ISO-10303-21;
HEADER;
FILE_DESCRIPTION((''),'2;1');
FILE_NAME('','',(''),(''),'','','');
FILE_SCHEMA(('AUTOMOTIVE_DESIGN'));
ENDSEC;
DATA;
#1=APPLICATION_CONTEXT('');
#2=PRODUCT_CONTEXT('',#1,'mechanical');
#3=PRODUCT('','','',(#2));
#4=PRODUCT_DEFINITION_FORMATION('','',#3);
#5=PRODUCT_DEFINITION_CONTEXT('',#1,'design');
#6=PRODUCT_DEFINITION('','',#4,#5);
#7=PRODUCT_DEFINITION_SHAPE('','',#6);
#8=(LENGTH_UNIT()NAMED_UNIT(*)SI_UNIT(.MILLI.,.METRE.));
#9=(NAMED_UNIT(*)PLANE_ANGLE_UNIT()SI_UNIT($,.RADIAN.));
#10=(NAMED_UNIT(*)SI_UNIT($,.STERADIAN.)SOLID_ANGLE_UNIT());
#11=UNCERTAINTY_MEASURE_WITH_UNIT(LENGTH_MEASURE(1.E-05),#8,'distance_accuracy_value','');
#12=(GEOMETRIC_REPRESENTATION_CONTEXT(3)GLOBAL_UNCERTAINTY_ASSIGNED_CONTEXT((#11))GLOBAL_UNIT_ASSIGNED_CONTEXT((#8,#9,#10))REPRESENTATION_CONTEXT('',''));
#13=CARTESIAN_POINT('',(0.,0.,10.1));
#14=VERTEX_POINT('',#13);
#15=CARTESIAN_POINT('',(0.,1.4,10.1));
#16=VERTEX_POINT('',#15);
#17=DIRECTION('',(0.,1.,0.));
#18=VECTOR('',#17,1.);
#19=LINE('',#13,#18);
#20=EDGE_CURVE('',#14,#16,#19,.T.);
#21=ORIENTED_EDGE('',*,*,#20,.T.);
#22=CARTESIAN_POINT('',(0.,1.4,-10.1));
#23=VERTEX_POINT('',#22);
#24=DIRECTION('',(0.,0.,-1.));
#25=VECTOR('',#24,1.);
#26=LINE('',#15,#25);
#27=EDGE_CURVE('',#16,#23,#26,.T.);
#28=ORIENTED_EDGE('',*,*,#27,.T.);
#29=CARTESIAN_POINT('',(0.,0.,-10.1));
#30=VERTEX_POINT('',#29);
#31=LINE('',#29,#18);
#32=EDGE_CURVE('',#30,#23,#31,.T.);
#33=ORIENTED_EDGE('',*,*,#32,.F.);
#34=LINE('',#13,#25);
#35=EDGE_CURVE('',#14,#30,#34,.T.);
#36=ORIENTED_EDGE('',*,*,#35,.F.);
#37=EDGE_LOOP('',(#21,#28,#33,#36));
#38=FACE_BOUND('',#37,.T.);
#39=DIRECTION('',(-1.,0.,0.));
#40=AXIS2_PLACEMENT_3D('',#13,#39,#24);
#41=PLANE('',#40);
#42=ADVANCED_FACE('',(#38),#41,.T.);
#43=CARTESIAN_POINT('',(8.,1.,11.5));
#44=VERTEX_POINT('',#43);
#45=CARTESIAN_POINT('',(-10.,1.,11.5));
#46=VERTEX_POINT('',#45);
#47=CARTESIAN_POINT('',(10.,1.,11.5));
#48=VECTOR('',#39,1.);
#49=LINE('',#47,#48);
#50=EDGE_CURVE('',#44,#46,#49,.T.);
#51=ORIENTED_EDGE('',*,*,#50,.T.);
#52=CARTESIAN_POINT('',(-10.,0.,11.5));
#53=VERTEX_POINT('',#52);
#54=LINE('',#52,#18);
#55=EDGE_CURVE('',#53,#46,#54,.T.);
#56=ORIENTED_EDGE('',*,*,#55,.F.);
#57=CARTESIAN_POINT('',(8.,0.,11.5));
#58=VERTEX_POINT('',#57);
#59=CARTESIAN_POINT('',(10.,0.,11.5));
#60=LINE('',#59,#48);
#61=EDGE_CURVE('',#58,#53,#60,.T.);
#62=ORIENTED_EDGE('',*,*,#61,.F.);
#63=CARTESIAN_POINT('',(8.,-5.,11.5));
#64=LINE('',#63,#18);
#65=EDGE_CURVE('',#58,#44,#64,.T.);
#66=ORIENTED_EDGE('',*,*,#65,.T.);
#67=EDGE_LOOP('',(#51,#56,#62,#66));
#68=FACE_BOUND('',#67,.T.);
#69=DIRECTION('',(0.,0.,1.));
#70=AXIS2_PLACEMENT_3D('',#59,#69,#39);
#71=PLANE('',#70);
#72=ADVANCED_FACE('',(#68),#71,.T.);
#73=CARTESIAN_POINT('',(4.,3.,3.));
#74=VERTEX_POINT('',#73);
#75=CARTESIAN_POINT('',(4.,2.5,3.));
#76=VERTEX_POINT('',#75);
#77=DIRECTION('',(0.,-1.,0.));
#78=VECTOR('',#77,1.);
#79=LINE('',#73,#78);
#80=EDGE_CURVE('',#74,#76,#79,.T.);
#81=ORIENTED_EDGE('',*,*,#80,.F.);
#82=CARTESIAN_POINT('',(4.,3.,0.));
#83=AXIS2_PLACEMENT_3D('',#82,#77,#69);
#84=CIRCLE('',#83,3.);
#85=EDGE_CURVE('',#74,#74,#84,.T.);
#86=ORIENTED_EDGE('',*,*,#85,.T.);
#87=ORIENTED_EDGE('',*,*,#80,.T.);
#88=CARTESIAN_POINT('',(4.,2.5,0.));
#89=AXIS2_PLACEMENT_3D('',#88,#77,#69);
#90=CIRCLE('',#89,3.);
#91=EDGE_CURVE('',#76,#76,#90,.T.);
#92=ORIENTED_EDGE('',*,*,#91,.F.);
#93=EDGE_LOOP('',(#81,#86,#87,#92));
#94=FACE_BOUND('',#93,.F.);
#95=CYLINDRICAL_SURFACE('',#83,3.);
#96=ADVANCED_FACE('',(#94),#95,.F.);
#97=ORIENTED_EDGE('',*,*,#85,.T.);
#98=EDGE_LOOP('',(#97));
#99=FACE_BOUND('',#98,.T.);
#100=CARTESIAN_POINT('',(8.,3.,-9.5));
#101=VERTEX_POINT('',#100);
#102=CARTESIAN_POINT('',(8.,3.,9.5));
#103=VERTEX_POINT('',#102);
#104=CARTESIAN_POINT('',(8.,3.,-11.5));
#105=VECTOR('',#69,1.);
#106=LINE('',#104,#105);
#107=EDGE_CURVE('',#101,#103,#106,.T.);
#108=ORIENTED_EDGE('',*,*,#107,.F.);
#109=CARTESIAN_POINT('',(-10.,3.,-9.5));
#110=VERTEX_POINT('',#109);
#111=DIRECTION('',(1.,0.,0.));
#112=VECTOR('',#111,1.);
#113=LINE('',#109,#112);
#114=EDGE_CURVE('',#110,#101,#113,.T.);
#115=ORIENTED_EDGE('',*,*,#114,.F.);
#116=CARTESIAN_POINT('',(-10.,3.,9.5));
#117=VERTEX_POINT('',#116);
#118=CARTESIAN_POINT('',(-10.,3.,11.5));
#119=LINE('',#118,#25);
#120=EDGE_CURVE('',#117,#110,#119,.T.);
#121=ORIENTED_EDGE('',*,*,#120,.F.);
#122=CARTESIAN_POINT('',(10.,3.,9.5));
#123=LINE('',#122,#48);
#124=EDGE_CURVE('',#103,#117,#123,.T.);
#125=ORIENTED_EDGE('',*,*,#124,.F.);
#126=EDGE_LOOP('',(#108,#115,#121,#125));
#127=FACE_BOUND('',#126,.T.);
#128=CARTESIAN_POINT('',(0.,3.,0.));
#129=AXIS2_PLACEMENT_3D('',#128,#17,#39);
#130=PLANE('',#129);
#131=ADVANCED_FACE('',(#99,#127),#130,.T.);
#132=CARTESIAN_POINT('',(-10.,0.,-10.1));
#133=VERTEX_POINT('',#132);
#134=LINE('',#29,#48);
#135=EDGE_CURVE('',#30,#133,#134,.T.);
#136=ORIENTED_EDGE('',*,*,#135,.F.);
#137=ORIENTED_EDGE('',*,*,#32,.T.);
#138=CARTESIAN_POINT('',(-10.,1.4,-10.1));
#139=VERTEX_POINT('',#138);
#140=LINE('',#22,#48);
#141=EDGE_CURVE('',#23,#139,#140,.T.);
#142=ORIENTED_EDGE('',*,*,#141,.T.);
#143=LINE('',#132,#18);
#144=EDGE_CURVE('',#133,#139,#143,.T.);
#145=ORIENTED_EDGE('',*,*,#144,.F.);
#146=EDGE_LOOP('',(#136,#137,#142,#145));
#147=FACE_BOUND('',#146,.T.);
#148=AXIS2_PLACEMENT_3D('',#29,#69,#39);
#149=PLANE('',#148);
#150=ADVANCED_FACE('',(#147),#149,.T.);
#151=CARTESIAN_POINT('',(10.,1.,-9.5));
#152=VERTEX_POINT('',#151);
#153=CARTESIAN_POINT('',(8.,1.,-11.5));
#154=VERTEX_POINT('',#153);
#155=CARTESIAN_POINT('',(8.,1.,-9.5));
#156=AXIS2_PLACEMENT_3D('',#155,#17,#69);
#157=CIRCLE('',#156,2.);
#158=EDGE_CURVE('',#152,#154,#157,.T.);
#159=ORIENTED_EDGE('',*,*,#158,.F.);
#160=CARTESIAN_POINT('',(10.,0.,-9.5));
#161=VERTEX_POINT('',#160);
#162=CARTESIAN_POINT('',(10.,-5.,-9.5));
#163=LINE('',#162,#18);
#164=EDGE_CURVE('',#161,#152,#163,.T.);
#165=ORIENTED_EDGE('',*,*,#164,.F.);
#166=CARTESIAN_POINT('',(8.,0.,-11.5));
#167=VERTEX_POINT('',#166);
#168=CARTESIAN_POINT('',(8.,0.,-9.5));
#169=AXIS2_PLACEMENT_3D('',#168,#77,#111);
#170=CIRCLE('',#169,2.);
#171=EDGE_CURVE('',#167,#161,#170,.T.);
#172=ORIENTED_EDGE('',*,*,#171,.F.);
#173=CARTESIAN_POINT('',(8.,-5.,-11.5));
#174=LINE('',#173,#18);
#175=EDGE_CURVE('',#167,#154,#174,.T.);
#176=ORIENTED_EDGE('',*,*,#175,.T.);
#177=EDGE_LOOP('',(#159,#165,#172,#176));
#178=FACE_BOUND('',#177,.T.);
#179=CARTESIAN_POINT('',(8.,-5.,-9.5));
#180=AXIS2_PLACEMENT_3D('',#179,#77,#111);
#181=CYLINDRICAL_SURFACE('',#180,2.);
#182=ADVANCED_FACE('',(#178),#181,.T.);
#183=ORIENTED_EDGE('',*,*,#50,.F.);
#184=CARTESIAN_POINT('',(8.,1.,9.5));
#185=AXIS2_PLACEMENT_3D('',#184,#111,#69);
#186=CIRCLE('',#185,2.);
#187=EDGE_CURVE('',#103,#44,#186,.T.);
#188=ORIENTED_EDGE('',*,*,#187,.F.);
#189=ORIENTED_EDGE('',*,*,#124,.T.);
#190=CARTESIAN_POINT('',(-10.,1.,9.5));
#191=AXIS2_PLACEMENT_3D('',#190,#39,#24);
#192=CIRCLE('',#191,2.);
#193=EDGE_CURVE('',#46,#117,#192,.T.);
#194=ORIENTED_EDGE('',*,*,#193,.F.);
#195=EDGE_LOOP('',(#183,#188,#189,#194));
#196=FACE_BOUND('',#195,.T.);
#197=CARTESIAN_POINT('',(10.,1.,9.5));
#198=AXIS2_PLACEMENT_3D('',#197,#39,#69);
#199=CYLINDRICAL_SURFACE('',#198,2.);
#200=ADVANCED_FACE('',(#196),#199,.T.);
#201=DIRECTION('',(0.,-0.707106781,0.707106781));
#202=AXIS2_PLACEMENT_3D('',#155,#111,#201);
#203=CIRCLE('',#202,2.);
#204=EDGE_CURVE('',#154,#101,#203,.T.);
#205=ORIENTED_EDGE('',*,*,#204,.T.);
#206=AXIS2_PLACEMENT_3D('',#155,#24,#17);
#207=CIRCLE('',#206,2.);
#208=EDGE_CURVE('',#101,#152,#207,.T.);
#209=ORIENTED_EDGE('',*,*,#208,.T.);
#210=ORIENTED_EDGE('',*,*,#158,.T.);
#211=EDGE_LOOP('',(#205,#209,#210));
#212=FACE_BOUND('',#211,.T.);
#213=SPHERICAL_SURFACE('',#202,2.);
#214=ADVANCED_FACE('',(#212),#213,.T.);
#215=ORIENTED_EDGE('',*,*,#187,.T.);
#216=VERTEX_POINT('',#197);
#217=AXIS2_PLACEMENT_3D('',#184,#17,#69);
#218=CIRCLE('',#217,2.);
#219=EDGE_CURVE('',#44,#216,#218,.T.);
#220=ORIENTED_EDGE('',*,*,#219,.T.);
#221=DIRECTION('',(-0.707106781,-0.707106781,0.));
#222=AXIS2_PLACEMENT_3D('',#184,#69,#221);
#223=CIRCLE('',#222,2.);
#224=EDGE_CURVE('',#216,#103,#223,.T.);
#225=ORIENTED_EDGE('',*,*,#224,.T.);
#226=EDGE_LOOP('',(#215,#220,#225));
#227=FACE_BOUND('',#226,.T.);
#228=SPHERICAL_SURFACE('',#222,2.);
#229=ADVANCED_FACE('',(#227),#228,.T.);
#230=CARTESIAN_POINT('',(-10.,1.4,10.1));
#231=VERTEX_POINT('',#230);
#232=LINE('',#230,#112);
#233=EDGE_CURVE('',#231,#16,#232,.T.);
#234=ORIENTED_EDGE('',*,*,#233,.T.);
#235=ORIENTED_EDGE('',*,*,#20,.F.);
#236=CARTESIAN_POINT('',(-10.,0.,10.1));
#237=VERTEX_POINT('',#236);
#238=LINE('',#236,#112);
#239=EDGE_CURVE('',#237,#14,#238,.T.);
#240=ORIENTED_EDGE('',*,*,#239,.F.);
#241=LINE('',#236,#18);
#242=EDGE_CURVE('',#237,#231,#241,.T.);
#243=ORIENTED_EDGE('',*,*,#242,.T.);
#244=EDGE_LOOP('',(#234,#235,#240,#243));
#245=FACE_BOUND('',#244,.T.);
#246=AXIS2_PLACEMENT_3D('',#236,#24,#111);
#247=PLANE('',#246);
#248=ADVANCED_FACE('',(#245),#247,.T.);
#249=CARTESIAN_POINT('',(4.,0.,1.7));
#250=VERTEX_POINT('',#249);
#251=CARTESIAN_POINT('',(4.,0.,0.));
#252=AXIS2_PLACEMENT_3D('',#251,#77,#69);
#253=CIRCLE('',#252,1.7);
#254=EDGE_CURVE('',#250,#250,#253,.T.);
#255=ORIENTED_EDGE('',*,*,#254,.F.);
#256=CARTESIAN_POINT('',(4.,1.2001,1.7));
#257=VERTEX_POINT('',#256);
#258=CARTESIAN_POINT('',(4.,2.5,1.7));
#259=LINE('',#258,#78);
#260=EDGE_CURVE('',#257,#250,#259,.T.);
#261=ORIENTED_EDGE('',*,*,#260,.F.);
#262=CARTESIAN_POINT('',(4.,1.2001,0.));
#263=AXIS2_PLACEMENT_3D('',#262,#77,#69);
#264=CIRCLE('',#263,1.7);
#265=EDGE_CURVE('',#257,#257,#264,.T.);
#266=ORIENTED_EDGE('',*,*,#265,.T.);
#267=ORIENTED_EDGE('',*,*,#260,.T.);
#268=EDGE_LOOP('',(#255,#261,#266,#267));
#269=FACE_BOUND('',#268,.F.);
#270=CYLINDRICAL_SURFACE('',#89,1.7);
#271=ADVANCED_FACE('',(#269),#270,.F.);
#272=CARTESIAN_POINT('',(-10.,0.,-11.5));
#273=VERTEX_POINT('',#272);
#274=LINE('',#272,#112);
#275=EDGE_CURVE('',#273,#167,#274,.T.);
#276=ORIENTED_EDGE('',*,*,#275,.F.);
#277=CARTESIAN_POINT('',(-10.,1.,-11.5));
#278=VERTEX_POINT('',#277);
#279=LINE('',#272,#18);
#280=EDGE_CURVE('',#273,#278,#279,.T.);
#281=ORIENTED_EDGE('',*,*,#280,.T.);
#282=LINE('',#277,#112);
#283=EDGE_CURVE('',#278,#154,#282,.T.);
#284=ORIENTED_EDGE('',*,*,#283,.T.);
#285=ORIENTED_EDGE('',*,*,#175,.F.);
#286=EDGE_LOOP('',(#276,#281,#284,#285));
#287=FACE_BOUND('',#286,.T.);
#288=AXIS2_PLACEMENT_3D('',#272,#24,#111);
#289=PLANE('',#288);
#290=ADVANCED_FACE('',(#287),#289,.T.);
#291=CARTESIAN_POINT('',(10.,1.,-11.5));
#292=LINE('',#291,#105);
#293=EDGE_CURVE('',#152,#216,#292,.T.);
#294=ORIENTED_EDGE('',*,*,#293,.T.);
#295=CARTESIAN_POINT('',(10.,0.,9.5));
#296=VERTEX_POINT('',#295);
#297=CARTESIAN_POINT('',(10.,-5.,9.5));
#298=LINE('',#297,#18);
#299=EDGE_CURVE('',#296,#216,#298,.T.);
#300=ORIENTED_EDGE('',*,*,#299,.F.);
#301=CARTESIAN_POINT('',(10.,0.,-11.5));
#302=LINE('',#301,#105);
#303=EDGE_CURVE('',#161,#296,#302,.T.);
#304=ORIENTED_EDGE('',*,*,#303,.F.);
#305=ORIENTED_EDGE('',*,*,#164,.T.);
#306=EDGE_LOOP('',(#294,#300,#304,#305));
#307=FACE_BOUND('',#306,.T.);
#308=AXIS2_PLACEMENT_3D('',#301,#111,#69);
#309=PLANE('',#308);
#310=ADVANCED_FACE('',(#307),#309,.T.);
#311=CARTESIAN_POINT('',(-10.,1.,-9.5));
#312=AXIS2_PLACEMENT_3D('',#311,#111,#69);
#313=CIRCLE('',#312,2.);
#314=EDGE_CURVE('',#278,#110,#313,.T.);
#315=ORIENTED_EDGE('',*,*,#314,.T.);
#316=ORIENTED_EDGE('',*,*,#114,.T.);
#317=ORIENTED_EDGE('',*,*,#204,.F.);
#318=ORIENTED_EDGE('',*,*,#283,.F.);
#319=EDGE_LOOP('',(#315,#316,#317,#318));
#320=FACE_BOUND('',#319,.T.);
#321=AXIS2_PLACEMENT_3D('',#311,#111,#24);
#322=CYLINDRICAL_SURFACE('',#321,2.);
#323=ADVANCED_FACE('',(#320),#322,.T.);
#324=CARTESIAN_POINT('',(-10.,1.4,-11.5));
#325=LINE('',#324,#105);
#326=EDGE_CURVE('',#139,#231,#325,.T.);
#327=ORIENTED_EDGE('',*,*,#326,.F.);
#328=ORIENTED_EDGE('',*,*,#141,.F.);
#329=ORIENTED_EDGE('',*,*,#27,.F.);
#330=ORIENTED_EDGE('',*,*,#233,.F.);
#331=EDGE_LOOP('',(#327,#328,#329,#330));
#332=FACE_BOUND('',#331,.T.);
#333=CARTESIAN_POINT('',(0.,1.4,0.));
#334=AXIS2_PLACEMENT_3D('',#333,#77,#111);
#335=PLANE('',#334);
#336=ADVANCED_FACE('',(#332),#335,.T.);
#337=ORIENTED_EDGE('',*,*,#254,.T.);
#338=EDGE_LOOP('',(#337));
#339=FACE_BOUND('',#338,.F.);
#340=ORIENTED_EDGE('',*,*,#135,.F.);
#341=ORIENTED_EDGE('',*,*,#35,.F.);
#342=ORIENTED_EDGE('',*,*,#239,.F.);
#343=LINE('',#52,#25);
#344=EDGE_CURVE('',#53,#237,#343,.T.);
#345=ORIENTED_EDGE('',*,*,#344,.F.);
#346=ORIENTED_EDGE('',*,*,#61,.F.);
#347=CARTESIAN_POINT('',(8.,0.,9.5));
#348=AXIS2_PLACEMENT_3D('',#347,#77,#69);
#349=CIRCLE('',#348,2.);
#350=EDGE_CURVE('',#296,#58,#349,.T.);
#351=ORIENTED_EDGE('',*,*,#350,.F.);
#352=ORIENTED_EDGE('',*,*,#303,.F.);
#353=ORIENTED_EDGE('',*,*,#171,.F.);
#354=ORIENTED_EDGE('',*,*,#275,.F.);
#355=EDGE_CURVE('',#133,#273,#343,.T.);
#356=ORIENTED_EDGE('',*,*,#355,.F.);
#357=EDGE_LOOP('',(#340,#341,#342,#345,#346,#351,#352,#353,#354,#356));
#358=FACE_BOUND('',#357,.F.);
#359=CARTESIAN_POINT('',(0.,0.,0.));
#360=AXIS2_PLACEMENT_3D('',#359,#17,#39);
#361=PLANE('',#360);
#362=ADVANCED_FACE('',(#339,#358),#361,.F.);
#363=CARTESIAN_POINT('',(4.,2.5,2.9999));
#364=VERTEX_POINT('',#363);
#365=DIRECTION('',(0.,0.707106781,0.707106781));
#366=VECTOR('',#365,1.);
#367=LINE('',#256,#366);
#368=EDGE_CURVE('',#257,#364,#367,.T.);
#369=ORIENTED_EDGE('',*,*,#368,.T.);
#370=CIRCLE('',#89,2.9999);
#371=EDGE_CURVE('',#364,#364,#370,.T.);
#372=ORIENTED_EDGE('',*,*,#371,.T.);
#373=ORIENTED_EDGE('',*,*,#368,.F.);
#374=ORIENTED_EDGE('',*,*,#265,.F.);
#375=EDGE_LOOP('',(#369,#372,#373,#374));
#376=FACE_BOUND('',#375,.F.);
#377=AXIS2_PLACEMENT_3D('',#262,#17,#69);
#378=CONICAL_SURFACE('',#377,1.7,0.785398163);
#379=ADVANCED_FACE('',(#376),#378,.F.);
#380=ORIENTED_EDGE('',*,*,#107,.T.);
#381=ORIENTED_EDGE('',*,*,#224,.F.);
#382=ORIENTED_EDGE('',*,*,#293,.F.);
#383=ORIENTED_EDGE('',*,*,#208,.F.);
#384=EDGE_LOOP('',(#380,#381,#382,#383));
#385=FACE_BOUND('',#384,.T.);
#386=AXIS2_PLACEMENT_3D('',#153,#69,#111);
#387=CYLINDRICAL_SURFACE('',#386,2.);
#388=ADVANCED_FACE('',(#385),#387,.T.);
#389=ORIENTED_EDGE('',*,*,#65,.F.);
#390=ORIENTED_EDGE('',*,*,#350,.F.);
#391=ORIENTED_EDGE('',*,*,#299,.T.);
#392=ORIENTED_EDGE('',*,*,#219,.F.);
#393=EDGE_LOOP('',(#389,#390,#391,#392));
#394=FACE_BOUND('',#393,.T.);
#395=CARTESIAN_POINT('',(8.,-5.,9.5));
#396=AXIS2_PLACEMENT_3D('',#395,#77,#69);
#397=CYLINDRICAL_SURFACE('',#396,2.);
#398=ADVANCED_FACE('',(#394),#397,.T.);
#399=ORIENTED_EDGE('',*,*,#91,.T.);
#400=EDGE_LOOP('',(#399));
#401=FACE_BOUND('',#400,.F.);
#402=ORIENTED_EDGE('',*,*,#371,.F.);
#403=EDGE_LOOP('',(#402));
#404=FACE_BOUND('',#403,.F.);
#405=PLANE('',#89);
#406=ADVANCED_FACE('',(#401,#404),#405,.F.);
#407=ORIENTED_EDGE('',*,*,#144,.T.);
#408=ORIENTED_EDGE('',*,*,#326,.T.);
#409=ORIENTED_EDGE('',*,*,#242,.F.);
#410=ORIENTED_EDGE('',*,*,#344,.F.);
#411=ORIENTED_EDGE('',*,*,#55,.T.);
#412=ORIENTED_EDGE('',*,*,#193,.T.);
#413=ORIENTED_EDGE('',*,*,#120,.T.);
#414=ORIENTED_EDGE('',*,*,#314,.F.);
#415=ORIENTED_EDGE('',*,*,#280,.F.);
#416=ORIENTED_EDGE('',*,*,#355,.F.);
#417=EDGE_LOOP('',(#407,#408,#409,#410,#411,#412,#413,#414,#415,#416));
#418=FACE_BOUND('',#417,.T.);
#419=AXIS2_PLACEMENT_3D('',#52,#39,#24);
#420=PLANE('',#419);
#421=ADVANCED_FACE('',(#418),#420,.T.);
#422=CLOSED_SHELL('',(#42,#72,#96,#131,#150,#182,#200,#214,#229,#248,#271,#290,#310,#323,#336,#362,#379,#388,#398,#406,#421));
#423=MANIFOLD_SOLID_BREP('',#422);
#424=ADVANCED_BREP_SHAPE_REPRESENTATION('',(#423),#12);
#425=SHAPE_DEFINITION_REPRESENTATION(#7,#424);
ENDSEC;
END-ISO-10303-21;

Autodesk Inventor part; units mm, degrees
ref_plane "YZ Plane" through (0, 0, 0) normal (1, 0, 0) x (0, 1, 0)
ref_plane "XZ Plane" through (0, 0, 0) normal (0, 1, 0) x (-1, 0, 0)
ref_plane "XY Plane" through (0, 0, 0) normal (0, 0, 1) x (1, 0, 0)
sketch "Sketch1" plane through (0, 0, 0) normal (0, 1, 0) x (-1, 0, 0)
  line L0 (-10, 11.5) -> (10, 11.5)
  line L1 (10, 11.5) -> (10, -11.5)
  line L2 (10, -11.5) -> (-10, -11.5)
  line L3 (-10, -11.5) -> (-10, 11.5)
  line L4 (-10, 11.5) -> (10, -11.5) construction
  line L5 (10, 11.5) -> (-10, -11.5) construction
  point P0 (0, 0)
  dimension "d0" = 20
  dimension "d1" = 23
extrude "Extrusion1" add sketch "Sketch1" along normal blind 3
sketch "Sketch2" plane through (0, 0, 0) normal (0, -1, 0) x (1, 0, 0)
  line L0 (10, -11.5) -> (-10, -11.5) projected
  line L1 (10, 11.5) -> (10, -11.5) projected
  line L2 (-10, 11.5) -> (10, 11.5) projected
  line L3 (-10, -11.5) -> (-10, 11.5) projected
  line L4 (0, -10.1) -> (-10, -10.1)
  line L5 (-10, -10.1) -> (-10, 10.1)
  line L6 (-10, 10.1) -> (0, 10.1)
  line L7 (0, 10.1) -> (0, -10.1)
  line L8 (0, -10.1) -> (-10, 10.1) construction
  line L9 (-10, -10.1) -> (0, 10.1) construction
  line L10 (-10, -11.5) -> (-10, 11.5) projected
  point P0 (0, 0)
  point P1 (-5, 0)
  dimension "d4" = 20.2
  dimension "d5" = 10
extrude "Extrusion2" cut sketch "Sketch2" against normal blind 1.4 contours L3 L6 L7 L4
sketch "Sketch3" plane through (0, 3, 0) normal (0, 1, 0) x (1, 0, 0)
  line L0 (10, -11.5) -> (10, 11.5) projected
  point P0 (0, 0)
  point P1 (4, 0)
  dimension "d8" = 6
hole "Hole1" at (4, 3, 0) direction (0, -1, 0) diameter 3.4 end through all counterbore diameter 6 counterbore depth 0.5
chamfer "Chamfer1" distance 1.3 angle 45 1 edges at (4, 2.5, -1.7)
fillet "Fillet1" radius 2 3 edges at (0, 3, 11.5) (10, 3, 0) (0, 3, -11.5)
fillet "Fillet2" radius 2 4 edges at (9.4142, 2.4142, 10.9142) (10, 0.5, 11.5) (9.4142, 2.4142, -10.9142) (10, 0.5, -11.5)
properties part number "LIKA LKM-1439"
